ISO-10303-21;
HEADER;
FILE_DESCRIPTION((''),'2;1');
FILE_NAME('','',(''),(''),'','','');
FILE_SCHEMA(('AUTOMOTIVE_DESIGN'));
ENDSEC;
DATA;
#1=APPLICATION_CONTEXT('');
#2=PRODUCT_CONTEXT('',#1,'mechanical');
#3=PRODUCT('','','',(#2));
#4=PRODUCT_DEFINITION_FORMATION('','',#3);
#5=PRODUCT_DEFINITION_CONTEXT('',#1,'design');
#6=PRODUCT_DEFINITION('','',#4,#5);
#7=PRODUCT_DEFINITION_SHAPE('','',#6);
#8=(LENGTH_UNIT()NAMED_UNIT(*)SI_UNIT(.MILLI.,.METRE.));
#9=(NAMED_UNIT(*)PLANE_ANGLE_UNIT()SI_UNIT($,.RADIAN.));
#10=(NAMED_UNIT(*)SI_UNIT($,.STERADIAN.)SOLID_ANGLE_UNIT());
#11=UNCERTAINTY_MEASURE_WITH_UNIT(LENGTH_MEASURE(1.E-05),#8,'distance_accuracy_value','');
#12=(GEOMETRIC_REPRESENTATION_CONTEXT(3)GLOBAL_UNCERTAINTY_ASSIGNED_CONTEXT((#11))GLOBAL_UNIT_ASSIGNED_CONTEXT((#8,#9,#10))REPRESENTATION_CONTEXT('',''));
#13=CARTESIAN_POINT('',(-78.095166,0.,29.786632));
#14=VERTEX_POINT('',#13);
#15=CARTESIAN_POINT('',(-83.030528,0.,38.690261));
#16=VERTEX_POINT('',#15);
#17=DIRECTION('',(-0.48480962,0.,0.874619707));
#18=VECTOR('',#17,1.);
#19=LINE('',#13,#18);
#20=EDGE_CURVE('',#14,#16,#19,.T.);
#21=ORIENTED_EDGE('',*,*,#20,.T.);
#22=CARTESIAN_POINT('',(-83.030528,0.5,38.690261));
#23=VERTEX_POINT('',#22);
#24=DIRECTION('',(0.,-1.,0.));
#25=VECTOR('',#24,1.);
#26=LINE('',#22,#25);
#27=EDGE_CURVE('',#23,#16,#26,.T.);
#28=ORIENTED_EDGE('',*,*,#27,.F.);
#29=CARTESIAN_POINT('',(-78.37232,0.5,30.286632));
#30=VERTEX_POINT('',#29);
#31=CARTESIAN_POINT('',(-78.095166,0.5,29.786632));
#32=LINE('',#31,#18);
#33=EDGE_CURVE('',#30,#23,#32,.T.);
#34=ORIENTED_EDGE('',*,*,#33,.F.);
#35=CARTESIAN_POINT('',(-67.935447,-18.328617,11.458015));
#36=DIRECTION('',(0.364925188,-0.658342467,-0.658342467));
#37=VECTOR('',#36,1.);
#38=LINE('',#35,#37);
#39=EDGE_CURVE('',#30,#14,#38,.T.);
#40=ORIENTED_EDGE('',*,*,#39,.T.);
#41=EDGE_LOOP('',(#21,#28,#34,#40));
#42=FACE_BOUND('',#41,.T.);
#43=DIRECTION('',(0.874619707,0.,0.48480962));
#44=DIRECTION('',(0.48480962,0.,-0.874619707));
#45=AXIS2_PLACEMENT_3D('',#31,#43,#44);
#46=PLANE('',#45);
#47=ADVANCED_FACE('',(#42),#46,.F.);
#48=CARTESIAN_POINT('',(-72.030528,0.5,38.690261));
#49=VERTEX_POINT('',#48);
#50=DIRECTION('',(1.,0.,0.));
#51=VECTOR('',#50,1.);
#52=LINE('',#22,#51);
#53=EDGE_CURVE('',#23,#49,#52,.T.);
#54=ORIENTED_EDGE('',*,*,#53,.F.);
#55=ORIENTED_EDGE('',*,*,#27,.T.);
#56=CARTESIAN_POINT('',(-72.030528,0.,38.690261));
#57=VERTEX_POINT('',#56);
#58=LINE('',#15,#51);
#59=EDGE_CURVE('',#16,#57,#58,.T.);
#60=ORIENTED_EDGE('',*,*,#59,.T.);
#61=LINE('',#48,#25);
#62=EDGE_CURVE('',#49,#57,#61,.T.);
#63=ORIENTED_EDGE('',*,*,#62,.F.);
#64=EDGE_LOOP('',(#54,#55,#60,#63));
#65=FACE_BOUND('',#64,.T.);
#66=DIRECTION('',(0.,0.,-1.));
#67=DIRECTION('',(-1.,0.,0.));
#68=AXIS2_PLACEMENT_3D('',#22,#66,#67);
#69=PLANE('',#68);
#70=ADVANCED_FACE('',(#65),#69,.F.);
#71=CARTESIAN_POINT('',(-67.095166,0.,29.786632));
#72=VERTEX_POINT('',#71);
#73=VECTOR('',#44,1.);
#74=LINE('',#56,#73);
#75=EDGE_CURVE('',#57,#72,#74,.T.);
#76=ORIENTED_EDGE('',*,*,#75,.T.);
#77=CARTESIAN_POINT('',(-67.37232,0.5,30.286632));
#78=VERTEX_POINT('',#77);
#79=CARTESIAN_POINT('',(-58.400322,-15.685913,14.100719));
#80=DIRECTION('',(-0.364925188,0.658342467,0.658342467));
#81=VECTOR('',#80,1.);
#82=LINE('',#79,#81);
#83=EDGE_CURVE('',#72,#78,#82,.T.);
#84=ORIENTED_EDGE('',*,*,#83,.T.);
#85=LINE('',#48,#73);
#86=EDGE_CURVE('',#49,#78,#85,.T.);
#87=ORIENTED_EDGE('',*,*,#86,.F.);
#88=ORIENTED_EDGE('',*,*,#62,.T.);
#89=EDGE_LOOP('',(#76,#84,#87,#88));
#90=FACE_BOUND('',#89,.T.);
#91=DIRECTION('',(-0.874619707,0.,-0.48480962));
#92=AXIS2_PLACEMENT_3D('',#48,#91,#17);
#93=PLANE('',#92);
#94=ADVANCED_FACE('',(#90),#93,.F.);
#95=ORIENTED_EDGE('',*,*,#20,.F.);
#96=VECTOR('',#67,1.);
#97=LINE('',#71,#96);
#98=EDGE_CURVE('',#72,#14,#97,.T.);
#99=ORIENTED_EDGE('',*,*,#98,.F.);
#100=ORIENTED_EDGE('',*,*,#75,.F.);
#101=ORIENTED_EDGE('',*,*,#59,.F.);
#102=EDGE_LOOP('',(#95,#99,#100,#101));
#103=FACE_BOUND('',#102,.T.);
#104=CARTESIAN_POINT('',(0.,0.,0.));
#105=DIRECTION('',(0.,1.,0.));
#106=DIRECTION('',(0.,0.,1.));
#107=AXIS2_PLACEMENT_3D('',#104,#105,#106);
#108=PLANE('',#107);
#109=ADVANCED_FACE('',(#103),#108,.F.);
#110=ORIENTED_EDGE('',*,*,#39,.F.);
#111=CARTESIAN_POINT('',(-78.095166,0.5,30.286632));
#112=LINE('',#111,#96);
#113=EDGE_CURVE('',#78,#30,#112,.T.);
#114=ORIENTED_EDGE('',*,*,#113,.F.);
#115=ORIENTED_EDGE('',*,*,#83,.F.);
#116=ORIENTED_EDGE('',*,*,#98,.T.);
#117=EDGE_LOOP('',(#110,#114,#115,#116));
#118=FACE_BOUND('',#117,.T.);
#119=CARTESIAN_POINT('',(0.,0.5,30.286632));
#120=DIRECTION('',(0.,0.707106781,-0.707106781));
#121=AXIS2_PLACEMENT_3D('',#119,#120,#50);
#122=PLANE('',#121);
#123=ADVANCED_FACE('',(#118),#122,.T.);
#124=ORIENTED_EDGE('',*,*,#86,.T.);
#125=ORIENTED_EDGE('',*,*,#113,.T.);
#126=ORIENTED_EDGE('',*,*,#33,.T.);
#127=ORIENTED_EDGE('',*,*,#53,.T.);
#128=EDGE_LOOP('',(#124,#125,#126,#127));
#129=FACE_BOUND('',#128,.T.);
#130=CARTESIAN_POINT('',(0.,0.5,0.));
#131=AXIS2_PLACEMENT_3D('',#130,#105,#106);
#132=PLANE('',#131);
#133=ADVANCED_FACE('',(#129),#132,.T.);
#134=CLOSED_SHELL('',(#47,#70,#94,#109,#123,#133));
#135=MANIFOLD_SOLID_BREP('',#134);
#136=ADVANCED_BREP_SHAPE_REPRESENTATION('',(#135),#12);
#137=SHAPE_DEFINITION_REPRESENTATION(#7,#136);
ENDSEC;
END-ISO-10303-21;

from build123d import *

# Parameters (mm, degrees)
BOSS_EXTRUDE1_DEPTH = 0.5
CHAMFER1_SIZE       = 0.5


with BuildPart() as part:
    # Sketch1 → Boss-Extrude1 (new body)
    with BuildSketch(Plane(origin=(0, 0, 0), x_dir=(1, 0, 0), z_dir=(0, 1, 0))):
        Polygon((-78.095165617, -29.786632), (-83.030527551, -38.690260619), (-72.030527551, -38.690260619), (-67.095165617, -29.786632), align=None)
    extrude(amount=BOSS_EXTRUDE1_DEPTH)

    # Chamfer1
    chamfer1_edges = [part.edges().sort_by_distance(p)[0] for p in [
        (-72.595165617, 0.5, 29.786632),
    ]]
    chamfer(chamfer1_edges, length=CHAMFER1_SIZE - 0.0001)  # a hair under: the kernel refuses the full size


solid = part.part
